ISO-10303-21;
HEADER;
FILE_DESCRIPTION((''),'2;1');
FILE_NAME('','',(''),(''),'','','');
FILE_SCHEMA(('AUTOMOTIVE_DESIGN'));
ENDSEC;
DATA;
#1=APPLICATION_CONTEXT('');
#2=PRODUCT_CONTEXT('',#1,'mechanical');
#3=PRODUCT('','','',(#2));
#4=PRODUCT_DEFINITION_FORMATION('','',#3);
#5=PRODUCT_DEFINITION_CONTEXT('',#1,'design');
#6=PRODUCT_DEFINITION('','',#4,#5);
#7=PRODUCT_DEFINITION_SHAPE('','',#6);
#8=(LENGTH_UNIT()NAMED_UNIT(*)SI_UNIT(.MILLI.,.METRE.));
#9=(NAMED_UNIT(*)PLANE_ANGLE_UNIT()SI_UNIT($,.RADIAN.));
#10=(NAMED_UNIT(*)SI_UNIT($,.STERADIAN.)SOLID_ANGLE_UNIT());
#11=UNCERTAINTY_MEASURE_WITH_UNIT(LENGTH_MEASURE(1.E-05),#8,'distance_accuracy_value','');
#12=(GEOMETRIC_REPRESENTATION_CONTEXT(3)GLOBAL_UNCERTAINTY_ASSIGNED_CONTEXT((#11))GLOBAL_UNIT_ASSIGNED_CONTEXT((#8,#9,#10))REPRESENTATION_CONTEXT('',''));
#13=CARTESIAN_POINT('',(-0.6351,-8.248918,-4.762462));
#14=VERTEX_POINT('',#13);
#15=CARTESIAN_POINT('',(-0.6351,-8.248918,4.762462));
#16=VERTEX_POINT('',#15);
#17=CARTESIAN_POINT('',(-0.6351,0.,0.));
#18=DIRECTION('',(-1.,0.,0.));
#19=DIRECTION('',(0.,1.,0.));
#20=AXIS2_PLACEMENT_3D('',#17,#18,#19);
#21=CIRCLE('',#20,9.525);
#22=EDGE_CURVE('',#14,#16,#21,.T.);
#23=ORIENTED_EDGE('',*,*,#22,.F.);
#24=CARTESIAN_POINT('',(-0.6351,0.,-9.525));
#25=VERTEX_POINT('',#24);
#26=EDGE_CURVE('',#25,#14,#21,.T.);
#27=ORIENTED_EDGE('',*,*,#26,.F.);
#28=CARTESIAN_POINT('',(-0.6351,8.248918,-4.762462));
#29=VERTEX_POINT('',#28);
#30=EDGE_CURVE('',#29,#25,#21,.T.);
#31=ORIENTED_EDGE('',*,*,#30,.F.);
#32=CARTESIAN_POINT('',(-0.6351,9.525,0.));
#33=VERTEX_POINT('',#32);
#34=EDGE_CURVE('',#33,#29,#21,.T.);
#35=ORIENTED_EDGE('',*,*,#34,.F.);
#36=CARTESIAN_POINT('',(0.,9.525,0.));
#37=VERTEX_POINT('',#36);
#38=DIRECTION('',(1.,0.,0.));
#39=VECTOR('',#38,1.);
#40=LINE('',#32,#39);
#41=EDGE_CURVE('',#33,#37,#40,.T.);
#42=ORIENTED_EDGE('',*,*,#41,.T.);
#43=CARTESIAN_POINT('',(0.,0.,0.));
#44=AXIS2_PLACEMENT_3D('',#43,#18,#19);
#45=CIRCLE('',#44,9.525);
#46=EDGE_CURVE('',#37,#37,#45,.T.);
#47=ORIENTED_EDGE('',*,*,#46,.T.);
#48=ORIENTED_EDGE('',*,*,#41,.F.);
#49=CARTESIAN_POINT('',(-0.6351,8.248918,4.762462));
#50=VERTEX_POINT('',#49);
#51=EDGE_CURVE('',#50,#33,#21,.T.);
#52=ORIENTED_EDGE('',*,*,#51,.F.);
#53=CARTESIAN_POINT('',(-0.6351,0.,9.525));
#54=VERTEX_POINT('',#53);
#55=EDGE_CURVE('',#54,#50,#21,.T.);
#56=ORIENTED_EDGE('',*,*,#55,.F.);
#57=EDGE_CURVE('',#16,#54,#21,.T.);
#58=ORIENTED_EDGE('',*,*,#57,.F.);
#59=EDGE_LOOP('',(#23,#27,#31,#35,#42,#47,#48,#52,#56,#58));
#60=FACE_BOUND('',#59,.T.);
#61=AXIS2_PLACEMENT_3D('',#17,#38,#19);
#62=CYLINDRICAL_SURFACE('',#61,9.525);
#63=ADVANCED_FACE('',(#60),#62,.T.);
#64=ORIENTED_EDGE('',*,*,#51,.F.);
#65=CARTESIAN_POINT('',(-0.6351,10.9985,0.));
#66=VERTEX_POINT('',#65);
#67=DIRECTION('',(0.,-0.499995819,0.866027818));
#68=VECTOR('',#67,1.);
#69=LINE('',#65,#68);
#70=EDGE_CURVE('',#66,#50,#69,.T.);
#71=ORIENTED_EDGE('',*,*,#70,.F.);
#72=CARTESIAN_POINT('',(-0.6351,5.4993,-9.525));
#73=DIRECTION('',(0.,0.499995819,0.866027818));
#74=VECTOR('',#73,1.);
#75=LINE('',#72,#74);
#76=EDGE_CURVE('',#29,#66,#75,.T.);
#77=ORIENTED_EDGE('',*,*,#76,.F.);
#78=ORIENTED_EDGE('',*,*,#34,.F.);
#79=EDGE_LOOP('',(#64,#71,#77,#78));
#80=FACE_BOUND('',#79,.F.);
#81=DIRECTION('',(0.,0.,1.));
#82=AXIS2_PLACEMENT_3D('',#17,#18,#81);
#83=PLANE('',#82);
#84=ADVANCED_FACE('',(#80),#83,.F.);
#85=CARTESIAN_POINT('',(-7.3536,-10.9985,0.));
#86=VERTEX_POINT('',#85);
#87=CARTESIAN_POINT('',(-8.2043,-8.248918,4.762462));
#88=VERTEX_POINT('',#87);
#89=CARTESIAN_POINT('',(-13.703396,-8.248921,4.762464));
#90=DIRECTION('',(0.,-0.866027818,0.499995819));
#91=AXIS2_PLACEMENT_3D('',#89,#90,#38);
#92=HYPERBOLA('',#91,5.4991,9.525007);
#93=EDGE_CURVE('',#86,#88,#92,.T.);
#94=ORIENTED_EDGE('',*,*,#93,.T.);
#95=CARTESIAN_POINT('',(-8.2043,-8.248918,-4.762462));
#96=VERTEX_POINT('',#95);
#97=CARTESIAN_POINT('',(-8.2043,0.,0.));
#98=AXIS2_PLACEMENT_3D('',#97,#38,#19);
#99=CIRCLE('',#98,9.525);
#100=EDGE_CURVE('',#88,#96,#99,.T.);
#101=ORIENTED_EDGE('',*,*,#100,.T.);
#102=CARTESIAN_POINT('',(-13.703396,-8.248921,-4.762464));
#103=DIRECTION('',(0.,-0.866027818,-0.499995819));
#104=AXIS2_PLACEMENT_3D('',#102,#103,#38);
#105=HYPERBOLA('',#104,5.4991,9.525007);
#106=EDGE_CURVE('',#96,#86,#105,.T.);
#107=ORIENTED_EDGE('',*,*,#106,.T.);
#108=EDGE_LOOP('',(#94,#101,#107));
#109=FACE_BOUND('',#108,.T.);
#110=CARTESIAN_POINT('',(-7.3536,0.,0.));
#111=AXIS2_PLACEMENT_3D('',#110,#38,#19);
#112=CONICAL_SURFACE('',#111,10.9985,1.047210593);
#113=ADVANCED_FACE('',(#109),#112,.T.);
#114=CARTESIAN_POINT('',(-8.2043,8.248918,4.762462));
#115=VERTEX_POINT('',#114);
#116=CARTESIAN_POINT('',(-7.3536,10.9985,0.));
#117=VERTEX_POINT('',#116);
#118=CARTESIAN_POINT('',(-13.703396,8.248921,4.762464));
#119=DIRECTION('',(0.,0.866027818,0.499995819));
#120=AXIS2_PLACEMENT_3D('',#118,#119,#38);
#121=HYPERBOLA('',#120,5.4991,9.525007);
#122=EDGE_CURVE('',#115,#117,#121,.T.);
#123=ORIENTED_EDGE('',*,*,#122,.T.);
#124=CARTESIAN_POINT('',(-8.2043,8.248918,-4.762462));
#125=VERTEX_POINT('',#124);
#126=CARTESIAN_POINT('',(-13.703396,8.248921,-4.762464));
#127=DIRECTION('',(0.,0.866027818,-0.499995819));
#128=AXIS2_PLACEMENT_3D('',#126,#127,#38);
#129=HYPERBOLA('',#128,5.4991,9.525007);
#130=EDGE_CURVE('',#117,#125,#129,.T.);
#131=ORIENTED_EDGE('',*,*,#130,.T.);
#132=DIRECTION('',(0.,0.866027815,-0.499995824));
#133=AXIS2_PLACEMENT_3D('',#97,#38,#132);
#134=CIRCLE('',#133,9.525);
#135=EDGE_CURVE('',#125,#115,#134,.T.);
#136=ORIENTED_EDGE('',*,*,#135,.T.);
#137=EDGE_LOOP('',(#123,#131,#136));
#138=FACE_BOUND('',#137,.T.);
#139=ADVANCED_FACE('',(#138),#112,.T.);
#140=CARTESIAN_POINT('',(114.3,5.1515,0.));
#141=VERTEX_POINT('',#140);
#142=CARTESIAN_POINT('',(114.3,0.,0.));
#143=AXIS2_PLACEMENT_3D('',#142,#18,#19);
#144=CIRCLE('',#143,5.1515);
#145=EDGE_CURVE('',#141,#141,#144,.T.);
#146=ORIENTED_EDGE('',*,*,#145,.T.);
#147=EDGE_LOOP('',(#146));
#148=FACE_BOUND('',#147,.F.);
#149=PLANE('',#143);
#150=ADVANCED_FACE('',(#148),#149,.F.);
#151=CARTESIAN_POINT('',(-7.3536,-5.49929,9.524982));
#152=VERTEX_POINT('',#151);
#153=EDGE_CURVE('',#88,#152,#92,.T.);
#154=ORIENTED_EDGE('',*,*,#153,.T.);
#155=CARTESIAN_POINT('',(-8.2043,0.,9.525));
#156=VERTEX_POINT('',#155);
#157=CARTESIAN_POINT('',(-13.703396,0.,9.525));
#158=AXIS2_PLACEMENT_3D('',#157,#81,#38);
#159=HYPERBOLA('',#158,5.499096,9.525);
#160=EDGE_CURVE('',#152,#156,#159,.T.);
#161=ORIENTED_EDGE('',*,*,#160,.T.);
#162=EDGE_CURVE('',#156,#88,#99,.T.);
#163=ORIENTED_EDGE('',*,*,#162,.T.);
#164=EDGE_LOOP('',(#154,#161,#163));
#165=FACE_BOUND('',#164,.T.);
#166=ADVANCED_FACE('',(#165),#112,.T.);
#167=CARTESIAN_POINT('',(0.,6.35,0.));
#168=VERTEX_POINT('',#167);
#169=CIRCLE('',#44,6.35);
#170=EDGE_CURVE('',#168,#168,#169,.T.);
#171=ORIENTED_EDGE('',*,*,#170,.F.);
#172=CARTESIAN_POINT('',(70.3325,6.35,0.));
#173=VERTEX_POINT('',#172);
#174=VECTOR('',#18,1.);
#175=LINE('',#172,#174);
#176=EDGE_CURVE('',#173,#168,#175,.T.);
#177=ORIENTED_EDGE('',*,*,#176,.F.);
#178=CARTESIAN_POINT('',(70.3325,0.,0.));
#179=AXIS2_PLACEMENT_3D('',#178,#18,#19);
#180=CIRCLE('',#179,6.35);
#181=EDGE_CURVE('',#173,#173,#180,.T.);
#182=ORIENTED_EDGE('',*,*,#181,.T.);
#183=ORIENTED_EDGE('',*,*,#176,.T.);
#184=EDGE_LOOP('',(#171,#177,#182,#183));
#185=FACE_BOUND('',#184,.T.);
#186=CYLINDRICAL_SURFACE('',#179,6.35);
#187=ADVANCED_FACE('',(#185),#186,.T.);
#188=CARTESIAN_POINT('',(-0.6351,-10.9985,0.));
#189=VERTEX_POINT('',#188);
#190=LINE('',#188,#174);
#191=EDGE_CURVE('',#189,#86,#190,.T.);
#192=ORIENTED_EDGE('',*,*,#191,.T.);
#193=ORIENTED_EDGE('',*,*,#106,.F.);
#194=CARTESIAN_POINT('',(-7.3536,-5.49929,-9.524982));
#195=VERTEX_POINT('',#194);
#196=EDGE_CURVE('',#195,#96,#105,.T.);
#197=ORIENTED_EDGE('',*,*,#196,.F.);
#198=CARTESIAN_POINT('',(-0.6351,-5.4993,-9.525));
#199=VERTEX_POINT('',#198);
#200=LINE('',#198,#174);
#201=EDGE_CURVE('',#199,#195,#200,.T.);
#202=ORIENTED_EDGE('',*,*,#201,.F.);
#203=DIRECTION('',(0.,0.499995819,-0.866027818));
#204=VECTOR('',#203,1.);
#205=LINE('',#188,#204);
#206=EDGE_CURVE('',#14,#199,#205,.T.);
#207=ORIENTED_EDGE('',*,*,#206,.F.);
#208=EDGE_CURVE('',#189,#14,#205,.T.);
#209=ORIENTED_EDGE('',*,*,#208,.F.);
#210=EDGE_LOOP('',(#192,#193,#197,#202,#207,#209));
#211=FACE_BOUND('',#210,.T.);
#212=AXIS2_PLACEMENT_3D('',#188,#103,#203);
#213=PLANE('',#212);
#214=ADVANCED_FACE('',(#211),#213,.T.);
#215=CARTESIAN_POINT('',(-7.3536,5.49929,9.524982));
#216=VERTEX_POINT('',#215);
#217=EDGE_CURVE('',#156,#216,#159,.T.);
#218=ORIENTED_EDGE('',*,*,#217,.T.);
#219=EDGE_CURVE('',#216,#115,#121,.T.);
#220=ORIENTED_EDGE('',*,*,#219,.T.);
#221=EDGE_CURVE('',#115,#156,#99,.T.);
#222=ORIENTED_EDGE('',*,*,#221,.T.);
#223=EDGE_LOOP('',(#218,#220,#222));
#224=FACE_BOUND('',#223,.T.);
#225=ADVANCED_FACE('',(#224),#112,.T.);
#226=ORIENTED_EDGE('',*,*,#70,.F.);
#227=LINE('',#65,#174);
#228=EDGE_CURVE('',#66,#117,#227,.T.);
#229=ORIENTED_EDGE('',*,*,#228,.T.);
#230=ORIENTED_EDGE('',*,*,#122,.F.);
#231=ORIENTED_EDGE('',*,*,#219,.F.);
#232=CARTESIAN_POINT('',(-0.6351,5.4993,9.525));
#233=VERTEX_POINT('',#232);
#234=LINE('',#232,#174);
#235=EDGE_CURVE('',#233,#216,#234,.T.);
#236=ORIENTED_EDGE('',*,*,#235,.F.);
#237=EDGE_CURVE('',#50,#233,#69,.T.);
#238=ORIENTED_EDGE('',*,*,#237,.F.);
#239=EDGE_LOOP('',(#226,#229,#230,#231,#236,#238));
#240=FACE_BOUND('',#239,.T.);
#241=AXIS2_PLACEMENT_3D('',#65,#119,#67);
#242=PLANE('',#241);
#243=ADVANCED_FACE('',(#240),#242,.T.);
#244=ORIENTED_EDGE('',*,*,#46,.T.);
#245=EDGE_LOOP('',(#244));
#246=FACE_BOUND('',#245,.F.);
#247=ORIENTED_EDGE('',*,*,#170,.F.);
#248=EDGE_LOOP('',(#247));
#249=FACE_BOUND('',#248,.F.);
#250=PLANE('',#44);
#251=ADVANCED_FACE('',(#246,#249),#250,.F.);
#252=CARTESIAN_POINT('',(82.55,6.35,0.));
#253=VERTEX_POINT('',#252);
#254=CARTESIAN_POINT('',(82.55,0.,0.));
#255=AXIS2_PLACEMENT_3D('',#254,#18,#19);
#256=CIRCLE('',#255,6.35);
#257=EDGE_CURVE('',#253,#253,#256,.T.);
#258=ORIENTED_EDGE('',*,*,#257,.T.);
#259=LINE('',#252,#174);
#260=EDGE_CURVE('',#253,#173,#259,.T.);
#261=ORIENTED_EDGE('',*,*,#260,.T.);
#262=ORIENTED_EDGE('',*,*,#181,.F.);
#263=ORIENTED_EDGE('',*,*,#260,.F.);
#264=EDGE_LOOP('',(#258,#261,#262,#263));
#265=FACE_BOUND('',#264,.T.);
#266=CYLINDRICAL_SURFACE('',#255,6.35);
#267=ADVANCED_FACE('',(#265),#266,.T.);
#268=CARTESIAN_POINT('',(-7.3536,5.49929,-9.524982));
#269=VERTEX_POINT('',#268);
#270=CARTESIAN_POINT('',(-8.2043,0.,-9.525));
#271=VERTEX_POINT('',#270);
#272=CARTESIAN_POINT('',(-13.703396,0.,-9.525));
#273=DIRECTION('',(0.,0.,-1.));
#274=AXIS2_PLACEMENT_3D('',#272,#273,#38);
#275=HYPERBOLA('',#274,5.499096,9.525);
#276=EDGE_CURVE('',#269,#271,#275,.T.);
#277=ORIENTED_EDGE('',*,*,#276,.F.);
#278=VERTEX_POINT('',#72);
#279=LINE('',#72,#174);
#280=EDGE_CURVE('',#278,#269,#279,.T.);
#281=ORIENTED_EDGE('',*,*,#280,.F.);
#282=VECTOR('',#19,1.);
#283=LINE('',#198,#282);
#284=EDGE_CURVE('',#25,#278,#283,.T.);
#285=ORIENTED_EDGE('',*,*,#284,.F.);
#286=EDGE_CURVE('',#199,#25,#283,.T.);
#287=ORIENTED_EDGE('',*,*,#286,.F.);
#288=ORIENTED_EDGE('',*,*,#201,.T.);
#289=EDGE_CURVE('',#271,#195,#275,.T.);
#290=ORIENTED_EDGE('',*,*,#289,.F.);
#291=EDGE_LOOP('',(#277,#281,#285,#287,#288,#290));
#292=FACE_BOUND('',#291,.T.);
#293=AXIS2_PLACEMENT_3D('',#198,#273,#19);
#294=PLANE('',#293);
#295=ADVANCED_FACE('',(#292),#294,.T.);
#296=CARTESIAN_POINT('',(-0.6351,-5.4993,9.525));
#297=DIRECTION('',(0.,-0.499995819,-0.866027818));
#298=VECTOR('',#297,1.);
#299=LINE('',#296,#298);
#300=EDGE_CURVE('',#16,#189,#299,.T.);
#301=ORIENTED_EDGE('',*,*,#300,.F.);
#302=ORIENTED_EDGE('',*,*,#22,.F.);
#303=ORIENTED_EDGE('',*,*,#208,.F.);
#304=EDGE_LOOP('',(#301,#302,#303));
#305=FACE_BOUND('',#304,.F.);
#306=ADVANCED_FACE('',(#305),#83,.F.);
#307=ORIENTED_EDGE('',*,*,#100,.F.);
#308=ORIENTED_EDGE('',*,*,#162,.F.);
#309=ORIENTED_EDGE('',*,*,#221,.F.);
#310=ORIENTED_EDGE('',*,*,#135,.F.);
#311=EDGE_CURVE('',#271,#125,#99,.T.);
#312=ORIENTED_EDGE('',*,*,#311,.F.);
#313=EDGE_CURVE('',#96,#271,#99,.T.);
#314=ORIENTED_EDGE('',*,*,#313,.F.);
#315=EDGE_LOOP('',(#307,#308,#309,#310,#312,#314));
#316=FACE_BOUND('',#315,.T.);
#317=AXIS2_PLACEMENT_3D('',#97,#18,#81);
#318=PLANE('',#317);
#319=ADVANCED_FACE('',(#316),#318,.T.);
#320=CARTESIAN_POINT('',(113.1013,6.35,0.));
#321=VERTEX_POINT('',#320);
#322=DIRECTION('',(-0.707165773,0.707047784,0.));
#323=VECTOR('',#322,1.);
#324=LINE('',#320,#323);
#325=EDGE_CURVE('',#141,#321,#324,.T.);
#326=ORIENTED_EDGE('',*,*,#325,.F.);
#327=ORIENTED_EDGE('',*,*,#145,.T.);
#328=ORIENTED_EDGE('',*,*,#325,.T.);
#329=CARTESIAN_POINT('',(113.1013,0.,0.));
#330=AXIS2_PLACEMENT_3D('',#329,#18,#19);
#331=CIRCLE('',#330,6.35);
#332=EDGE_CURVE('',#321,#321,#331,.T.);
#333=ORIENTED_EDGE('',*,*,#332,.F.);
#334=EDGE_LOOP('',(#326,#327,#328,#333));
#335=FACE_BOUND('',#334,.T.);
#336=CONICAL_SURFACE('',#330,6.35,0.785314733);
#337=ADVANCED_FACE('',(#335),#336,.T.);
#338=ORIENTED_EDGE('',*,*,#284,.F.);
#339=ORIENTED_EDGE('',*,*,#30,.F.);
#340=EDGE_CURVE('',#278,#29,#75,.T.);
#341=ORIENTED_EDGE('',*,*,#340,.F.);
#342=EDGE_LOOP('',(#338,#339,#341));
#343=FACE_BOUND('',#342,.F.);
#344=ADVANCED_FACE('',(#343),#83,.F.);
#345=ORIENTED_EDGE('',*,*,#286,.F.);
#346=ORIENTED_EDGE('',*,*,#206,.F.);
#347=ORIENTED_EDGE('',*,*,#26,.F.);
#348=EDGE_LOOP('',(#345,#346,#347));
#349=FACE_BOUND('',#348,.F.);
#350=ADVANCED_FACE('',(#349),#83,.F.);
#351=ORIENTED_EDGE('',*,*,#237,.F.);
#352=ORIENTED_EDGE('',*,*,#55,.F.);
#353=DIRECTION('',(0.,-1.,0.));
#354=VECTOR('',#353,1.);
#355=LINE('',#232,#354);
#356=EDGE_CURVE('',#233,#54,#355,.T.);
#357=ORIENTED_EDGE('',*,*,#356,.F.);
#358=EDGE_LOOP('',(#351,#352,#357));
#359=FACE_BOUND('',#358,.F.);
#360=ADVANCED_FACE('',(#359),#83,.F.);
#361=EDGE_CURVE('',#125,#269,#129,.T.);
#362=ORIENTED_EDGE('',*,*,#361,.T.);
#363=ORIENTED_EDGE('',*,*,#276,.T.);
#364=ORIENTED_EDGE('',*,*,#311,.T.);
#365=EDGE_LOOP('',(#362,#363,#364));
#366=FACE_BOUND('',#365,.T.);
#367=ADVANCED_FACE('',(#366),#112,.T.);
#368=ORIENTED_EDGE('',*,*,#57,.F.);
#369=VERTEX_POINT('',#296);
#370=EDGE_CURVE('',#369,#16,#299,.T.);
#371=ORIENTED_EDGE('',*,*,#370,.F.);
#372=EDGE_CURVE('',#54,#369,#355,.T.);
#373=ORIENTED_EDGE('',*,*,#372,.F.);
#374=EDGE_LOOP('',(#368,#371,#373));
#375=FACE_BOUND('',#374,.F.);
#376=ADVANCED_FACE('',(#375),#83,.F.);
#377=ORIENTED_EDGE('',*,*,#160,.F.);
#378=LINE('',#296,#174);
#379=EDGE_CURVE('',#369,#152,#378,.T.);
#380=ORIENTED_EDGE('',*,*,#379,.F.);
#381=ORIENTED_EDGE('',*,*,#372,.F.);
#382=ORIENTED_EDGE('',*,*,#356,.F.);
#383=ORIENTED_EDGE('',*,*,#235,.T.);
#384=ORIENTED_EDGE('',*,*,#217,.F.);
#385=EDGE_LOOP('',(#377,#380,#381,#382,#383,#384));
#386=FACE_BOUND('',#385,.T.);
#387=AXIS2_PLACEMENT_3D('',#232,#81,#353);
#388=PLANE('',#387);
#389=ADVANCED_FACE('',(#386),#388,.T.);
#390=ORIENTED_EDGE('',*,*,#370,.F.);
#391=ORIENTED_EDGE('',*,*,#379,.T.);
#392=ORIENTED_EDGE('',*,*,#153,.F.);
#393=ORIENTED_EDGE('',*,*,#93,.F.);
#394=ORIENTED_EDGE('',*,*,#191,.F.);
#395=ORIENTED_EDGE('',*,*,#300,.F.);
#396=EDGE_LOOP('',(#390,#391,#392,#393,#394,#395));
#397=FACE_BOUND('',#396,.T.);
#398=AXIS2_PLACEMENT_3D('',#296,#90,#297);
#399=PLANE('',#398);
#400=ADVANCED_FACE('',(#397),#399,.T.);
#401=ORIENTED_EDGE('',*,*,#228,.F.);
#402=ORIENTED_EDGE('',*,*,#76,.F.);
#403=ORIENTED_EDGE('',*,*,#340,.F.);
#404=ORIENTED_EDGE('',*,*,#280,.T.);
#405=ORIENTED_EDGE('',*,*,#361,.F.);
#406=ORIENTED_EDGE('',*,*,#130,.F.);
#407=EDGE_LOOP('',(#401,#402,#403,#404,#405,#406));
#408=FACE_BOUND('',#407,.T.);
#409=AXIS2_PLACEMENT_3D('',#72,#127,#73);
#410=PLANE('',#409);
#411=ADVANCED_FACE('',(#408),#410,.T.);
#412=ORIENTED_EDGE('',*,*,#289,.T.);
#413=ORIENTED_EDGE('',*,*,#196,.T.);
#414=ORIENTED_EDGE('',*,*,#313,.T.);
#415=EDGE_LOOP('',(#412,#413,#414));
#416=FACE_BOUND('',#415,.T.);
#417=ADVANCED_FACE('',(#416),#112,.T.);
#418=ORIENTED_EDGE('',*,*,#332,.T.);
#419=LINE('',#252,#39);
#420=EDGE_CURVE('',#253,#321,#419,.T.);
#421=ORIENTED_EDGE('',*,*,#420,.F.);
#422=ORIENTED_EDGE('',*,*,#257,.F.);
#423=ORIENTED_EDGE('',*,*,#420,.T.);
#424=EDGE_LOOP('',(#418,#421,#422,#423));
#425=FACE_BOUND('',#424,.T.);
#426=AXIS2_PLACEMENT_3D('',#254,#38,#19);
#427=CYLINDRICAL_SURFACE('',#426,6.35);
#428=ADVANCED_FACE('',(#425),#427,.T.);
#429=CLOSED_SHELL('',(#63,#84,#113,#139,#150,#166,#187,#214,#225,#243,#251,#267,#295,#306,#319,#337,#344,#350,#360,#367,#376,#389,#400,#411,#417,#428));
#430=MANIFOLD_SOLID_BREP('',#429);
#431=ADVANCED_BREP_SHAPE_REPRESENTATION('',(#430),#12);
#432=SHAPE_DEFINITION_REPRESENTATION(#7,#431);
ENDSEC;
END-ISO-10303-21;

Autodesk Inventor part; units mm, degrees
ref_plane "YZ Plane" through (0, 0, 0) normal (1, 0, 0) x (0, 1, 0)
ref_plane "XZ Plane" through (0, 0, 0) normal (0, 1, 0) x (-1, 0, 0)
sketch "Sketch1" plane through (0, 0, 0) normal (0, 0, 1) x (1, 0, 0)
  line L0 (0, 9.525) -> (0, 6.35)
  line L1 (82.55, 6.35) -> (114.3, 6.35)
  line L2 (114.3, 6.35) -> (114.3, 0)
  line L3 (114.3, 0) -> (-0.6351, 0)
  line L4 (-23.6221, 0) -> (137.287, 0) projected
  line L5 (-0.6351, 0) -> (-0.6351, 9.525)
  line L6 (-0.6351, 9.525) -> (0, 9.525)
  line L7 (82.55, 6.35) -> (70.3325, 6.35)
  line L8 (70.3325, 6.35) -> (0, 6.35)
  line L9 (0, -1.905) -> (0, 11.43) projected
  dimension "d0" = 114.3
  dimension "d1" = 31.75
  dimension "d2" = 12.7
  dimension "d9" = 0.6351
  dimension "d10" = 19.05
  dimension "d13" = 12.2175
  dimension "d14" = 12.7
revolve "Body" add sketch "Sketch1" angle 360 about axis through (114.3, 0, 0) along (-1, 0, 0)
sketch "Sketch2" plane through (-0.6351, 0, 0) normal (-1, 0, 0) x (0, 0, 1)
  line L0 (0, 10.9985) -> (9.525, 5.4993)
  line L1 (9.525, 5.4993) -> (9.525, -5.4993)
  line L2 (9.525, -5.4993) -> (0, -10.9985)
  line L3 (0, -10.9985) -> (-9.525, -5.4993)
  line L4 (-9.525, -5.4993) -> (-9.525, 5.4993)
  line L5 (-9.525, 5.4993) -> (0, 10.9985)
  point P0 (0, 0)
  point P1 (0, 0)
  dimension "d11" = 19.05
extrude "Head" add sketch "Sketch2" along normal blind 7.5692
sketch "Sketch4" plane through (0, 0, 0) normal (0, 0, 1) x (1, 0, 0)
  line L0 (-8.2043, 9.525) -> (-8.2043, 10.9985)
  line L1 (-8.2043, 10.9985) -> (-7.3536, 10.9985)
  line L2 (-7.3536, 10.9985) -> (-8.2043, 9.525)
  line L3 (-9.7181, 0) -> (0.8787, 0) projected
  line L4 (-0.6351, 10.9985) -> (-8.2043, 10.9985) projected
  line L5 (-8.2043, 5.4993) -> (-8.2043, 10.9985) projected
  dimension "d5" = 30
  dimension "d19" = 19.05
revolve "Chamfer1" cut sketch "Sketch4" angle 360 about axis through (-10, 0, 0) along (1, 0, 0)
thread "Thread" size "1/2-13 UNC" class "2A" standard "ANSI Unified Screw Threads" length 31.75
chamfer "Chamfer2" distance 1.1985 distance2 1.1987 1 edges at (114.3, -6.35, 0) measured on face at (114.3, -0.1022, -0.7437)
ref_plane "Work Plane1" through (1.525, 0, 0) normal (0, 0, 1) x (1, 0, 0)
equation "\"d0\" = NLG"
equation "\"d1\" = GEL"
equation "\"d2\" = GD"
equation "\"d10\" = SD2"
equation "\"d14\" = BDM"
equation "\"d11\" = SW"
equation "\"d3\" = KOH - SD"
equation "\"d5\" = ANG1"
equation "\"d19\" = SW0"
equation "\"d15\" = GEL"
equation "\"d6\" = -0.5 * SPD + 0.5 * GD"
equation "\"NLG\" = 114.3"
equation "\"GD\" = 12.7"
equation "\"BDM\" = 12.7"
equation "\"KOH\" = 8.2042"
equation "\"GEL\" = 31.75"
equation "\"SW\" = 19.05"
equation "\"SW0\" = SW"
equation "\"SPD\" = GD1"
equation "\"SD2\" = SW"
equation "\"SD\" = 0.635"
equation "\"ANG1\" = 30deg"
equation "\"GAL\" = 12.2174"
equation "\"GUL\" = 1.19863"
equation "\"RR\" = 0.381"
equation "\"WFT\" = SD"
equation "\"GD1\" = 10.303"
equation "\"THREADDIA\" = 12.7"
equation "\"SDH\" = SW"
equation "\"SDHG\" = 70.3326"
equation "\"TOA\" = 30deg"
equation "\"FAWI\" = 45deg"
equation "\"NND\" = 12.7"
equation "\"E0\" = 22.00275"
properties part number "AS 2465 - 1/2 x 4 1/2  UNC" material "Steel, Mild"
